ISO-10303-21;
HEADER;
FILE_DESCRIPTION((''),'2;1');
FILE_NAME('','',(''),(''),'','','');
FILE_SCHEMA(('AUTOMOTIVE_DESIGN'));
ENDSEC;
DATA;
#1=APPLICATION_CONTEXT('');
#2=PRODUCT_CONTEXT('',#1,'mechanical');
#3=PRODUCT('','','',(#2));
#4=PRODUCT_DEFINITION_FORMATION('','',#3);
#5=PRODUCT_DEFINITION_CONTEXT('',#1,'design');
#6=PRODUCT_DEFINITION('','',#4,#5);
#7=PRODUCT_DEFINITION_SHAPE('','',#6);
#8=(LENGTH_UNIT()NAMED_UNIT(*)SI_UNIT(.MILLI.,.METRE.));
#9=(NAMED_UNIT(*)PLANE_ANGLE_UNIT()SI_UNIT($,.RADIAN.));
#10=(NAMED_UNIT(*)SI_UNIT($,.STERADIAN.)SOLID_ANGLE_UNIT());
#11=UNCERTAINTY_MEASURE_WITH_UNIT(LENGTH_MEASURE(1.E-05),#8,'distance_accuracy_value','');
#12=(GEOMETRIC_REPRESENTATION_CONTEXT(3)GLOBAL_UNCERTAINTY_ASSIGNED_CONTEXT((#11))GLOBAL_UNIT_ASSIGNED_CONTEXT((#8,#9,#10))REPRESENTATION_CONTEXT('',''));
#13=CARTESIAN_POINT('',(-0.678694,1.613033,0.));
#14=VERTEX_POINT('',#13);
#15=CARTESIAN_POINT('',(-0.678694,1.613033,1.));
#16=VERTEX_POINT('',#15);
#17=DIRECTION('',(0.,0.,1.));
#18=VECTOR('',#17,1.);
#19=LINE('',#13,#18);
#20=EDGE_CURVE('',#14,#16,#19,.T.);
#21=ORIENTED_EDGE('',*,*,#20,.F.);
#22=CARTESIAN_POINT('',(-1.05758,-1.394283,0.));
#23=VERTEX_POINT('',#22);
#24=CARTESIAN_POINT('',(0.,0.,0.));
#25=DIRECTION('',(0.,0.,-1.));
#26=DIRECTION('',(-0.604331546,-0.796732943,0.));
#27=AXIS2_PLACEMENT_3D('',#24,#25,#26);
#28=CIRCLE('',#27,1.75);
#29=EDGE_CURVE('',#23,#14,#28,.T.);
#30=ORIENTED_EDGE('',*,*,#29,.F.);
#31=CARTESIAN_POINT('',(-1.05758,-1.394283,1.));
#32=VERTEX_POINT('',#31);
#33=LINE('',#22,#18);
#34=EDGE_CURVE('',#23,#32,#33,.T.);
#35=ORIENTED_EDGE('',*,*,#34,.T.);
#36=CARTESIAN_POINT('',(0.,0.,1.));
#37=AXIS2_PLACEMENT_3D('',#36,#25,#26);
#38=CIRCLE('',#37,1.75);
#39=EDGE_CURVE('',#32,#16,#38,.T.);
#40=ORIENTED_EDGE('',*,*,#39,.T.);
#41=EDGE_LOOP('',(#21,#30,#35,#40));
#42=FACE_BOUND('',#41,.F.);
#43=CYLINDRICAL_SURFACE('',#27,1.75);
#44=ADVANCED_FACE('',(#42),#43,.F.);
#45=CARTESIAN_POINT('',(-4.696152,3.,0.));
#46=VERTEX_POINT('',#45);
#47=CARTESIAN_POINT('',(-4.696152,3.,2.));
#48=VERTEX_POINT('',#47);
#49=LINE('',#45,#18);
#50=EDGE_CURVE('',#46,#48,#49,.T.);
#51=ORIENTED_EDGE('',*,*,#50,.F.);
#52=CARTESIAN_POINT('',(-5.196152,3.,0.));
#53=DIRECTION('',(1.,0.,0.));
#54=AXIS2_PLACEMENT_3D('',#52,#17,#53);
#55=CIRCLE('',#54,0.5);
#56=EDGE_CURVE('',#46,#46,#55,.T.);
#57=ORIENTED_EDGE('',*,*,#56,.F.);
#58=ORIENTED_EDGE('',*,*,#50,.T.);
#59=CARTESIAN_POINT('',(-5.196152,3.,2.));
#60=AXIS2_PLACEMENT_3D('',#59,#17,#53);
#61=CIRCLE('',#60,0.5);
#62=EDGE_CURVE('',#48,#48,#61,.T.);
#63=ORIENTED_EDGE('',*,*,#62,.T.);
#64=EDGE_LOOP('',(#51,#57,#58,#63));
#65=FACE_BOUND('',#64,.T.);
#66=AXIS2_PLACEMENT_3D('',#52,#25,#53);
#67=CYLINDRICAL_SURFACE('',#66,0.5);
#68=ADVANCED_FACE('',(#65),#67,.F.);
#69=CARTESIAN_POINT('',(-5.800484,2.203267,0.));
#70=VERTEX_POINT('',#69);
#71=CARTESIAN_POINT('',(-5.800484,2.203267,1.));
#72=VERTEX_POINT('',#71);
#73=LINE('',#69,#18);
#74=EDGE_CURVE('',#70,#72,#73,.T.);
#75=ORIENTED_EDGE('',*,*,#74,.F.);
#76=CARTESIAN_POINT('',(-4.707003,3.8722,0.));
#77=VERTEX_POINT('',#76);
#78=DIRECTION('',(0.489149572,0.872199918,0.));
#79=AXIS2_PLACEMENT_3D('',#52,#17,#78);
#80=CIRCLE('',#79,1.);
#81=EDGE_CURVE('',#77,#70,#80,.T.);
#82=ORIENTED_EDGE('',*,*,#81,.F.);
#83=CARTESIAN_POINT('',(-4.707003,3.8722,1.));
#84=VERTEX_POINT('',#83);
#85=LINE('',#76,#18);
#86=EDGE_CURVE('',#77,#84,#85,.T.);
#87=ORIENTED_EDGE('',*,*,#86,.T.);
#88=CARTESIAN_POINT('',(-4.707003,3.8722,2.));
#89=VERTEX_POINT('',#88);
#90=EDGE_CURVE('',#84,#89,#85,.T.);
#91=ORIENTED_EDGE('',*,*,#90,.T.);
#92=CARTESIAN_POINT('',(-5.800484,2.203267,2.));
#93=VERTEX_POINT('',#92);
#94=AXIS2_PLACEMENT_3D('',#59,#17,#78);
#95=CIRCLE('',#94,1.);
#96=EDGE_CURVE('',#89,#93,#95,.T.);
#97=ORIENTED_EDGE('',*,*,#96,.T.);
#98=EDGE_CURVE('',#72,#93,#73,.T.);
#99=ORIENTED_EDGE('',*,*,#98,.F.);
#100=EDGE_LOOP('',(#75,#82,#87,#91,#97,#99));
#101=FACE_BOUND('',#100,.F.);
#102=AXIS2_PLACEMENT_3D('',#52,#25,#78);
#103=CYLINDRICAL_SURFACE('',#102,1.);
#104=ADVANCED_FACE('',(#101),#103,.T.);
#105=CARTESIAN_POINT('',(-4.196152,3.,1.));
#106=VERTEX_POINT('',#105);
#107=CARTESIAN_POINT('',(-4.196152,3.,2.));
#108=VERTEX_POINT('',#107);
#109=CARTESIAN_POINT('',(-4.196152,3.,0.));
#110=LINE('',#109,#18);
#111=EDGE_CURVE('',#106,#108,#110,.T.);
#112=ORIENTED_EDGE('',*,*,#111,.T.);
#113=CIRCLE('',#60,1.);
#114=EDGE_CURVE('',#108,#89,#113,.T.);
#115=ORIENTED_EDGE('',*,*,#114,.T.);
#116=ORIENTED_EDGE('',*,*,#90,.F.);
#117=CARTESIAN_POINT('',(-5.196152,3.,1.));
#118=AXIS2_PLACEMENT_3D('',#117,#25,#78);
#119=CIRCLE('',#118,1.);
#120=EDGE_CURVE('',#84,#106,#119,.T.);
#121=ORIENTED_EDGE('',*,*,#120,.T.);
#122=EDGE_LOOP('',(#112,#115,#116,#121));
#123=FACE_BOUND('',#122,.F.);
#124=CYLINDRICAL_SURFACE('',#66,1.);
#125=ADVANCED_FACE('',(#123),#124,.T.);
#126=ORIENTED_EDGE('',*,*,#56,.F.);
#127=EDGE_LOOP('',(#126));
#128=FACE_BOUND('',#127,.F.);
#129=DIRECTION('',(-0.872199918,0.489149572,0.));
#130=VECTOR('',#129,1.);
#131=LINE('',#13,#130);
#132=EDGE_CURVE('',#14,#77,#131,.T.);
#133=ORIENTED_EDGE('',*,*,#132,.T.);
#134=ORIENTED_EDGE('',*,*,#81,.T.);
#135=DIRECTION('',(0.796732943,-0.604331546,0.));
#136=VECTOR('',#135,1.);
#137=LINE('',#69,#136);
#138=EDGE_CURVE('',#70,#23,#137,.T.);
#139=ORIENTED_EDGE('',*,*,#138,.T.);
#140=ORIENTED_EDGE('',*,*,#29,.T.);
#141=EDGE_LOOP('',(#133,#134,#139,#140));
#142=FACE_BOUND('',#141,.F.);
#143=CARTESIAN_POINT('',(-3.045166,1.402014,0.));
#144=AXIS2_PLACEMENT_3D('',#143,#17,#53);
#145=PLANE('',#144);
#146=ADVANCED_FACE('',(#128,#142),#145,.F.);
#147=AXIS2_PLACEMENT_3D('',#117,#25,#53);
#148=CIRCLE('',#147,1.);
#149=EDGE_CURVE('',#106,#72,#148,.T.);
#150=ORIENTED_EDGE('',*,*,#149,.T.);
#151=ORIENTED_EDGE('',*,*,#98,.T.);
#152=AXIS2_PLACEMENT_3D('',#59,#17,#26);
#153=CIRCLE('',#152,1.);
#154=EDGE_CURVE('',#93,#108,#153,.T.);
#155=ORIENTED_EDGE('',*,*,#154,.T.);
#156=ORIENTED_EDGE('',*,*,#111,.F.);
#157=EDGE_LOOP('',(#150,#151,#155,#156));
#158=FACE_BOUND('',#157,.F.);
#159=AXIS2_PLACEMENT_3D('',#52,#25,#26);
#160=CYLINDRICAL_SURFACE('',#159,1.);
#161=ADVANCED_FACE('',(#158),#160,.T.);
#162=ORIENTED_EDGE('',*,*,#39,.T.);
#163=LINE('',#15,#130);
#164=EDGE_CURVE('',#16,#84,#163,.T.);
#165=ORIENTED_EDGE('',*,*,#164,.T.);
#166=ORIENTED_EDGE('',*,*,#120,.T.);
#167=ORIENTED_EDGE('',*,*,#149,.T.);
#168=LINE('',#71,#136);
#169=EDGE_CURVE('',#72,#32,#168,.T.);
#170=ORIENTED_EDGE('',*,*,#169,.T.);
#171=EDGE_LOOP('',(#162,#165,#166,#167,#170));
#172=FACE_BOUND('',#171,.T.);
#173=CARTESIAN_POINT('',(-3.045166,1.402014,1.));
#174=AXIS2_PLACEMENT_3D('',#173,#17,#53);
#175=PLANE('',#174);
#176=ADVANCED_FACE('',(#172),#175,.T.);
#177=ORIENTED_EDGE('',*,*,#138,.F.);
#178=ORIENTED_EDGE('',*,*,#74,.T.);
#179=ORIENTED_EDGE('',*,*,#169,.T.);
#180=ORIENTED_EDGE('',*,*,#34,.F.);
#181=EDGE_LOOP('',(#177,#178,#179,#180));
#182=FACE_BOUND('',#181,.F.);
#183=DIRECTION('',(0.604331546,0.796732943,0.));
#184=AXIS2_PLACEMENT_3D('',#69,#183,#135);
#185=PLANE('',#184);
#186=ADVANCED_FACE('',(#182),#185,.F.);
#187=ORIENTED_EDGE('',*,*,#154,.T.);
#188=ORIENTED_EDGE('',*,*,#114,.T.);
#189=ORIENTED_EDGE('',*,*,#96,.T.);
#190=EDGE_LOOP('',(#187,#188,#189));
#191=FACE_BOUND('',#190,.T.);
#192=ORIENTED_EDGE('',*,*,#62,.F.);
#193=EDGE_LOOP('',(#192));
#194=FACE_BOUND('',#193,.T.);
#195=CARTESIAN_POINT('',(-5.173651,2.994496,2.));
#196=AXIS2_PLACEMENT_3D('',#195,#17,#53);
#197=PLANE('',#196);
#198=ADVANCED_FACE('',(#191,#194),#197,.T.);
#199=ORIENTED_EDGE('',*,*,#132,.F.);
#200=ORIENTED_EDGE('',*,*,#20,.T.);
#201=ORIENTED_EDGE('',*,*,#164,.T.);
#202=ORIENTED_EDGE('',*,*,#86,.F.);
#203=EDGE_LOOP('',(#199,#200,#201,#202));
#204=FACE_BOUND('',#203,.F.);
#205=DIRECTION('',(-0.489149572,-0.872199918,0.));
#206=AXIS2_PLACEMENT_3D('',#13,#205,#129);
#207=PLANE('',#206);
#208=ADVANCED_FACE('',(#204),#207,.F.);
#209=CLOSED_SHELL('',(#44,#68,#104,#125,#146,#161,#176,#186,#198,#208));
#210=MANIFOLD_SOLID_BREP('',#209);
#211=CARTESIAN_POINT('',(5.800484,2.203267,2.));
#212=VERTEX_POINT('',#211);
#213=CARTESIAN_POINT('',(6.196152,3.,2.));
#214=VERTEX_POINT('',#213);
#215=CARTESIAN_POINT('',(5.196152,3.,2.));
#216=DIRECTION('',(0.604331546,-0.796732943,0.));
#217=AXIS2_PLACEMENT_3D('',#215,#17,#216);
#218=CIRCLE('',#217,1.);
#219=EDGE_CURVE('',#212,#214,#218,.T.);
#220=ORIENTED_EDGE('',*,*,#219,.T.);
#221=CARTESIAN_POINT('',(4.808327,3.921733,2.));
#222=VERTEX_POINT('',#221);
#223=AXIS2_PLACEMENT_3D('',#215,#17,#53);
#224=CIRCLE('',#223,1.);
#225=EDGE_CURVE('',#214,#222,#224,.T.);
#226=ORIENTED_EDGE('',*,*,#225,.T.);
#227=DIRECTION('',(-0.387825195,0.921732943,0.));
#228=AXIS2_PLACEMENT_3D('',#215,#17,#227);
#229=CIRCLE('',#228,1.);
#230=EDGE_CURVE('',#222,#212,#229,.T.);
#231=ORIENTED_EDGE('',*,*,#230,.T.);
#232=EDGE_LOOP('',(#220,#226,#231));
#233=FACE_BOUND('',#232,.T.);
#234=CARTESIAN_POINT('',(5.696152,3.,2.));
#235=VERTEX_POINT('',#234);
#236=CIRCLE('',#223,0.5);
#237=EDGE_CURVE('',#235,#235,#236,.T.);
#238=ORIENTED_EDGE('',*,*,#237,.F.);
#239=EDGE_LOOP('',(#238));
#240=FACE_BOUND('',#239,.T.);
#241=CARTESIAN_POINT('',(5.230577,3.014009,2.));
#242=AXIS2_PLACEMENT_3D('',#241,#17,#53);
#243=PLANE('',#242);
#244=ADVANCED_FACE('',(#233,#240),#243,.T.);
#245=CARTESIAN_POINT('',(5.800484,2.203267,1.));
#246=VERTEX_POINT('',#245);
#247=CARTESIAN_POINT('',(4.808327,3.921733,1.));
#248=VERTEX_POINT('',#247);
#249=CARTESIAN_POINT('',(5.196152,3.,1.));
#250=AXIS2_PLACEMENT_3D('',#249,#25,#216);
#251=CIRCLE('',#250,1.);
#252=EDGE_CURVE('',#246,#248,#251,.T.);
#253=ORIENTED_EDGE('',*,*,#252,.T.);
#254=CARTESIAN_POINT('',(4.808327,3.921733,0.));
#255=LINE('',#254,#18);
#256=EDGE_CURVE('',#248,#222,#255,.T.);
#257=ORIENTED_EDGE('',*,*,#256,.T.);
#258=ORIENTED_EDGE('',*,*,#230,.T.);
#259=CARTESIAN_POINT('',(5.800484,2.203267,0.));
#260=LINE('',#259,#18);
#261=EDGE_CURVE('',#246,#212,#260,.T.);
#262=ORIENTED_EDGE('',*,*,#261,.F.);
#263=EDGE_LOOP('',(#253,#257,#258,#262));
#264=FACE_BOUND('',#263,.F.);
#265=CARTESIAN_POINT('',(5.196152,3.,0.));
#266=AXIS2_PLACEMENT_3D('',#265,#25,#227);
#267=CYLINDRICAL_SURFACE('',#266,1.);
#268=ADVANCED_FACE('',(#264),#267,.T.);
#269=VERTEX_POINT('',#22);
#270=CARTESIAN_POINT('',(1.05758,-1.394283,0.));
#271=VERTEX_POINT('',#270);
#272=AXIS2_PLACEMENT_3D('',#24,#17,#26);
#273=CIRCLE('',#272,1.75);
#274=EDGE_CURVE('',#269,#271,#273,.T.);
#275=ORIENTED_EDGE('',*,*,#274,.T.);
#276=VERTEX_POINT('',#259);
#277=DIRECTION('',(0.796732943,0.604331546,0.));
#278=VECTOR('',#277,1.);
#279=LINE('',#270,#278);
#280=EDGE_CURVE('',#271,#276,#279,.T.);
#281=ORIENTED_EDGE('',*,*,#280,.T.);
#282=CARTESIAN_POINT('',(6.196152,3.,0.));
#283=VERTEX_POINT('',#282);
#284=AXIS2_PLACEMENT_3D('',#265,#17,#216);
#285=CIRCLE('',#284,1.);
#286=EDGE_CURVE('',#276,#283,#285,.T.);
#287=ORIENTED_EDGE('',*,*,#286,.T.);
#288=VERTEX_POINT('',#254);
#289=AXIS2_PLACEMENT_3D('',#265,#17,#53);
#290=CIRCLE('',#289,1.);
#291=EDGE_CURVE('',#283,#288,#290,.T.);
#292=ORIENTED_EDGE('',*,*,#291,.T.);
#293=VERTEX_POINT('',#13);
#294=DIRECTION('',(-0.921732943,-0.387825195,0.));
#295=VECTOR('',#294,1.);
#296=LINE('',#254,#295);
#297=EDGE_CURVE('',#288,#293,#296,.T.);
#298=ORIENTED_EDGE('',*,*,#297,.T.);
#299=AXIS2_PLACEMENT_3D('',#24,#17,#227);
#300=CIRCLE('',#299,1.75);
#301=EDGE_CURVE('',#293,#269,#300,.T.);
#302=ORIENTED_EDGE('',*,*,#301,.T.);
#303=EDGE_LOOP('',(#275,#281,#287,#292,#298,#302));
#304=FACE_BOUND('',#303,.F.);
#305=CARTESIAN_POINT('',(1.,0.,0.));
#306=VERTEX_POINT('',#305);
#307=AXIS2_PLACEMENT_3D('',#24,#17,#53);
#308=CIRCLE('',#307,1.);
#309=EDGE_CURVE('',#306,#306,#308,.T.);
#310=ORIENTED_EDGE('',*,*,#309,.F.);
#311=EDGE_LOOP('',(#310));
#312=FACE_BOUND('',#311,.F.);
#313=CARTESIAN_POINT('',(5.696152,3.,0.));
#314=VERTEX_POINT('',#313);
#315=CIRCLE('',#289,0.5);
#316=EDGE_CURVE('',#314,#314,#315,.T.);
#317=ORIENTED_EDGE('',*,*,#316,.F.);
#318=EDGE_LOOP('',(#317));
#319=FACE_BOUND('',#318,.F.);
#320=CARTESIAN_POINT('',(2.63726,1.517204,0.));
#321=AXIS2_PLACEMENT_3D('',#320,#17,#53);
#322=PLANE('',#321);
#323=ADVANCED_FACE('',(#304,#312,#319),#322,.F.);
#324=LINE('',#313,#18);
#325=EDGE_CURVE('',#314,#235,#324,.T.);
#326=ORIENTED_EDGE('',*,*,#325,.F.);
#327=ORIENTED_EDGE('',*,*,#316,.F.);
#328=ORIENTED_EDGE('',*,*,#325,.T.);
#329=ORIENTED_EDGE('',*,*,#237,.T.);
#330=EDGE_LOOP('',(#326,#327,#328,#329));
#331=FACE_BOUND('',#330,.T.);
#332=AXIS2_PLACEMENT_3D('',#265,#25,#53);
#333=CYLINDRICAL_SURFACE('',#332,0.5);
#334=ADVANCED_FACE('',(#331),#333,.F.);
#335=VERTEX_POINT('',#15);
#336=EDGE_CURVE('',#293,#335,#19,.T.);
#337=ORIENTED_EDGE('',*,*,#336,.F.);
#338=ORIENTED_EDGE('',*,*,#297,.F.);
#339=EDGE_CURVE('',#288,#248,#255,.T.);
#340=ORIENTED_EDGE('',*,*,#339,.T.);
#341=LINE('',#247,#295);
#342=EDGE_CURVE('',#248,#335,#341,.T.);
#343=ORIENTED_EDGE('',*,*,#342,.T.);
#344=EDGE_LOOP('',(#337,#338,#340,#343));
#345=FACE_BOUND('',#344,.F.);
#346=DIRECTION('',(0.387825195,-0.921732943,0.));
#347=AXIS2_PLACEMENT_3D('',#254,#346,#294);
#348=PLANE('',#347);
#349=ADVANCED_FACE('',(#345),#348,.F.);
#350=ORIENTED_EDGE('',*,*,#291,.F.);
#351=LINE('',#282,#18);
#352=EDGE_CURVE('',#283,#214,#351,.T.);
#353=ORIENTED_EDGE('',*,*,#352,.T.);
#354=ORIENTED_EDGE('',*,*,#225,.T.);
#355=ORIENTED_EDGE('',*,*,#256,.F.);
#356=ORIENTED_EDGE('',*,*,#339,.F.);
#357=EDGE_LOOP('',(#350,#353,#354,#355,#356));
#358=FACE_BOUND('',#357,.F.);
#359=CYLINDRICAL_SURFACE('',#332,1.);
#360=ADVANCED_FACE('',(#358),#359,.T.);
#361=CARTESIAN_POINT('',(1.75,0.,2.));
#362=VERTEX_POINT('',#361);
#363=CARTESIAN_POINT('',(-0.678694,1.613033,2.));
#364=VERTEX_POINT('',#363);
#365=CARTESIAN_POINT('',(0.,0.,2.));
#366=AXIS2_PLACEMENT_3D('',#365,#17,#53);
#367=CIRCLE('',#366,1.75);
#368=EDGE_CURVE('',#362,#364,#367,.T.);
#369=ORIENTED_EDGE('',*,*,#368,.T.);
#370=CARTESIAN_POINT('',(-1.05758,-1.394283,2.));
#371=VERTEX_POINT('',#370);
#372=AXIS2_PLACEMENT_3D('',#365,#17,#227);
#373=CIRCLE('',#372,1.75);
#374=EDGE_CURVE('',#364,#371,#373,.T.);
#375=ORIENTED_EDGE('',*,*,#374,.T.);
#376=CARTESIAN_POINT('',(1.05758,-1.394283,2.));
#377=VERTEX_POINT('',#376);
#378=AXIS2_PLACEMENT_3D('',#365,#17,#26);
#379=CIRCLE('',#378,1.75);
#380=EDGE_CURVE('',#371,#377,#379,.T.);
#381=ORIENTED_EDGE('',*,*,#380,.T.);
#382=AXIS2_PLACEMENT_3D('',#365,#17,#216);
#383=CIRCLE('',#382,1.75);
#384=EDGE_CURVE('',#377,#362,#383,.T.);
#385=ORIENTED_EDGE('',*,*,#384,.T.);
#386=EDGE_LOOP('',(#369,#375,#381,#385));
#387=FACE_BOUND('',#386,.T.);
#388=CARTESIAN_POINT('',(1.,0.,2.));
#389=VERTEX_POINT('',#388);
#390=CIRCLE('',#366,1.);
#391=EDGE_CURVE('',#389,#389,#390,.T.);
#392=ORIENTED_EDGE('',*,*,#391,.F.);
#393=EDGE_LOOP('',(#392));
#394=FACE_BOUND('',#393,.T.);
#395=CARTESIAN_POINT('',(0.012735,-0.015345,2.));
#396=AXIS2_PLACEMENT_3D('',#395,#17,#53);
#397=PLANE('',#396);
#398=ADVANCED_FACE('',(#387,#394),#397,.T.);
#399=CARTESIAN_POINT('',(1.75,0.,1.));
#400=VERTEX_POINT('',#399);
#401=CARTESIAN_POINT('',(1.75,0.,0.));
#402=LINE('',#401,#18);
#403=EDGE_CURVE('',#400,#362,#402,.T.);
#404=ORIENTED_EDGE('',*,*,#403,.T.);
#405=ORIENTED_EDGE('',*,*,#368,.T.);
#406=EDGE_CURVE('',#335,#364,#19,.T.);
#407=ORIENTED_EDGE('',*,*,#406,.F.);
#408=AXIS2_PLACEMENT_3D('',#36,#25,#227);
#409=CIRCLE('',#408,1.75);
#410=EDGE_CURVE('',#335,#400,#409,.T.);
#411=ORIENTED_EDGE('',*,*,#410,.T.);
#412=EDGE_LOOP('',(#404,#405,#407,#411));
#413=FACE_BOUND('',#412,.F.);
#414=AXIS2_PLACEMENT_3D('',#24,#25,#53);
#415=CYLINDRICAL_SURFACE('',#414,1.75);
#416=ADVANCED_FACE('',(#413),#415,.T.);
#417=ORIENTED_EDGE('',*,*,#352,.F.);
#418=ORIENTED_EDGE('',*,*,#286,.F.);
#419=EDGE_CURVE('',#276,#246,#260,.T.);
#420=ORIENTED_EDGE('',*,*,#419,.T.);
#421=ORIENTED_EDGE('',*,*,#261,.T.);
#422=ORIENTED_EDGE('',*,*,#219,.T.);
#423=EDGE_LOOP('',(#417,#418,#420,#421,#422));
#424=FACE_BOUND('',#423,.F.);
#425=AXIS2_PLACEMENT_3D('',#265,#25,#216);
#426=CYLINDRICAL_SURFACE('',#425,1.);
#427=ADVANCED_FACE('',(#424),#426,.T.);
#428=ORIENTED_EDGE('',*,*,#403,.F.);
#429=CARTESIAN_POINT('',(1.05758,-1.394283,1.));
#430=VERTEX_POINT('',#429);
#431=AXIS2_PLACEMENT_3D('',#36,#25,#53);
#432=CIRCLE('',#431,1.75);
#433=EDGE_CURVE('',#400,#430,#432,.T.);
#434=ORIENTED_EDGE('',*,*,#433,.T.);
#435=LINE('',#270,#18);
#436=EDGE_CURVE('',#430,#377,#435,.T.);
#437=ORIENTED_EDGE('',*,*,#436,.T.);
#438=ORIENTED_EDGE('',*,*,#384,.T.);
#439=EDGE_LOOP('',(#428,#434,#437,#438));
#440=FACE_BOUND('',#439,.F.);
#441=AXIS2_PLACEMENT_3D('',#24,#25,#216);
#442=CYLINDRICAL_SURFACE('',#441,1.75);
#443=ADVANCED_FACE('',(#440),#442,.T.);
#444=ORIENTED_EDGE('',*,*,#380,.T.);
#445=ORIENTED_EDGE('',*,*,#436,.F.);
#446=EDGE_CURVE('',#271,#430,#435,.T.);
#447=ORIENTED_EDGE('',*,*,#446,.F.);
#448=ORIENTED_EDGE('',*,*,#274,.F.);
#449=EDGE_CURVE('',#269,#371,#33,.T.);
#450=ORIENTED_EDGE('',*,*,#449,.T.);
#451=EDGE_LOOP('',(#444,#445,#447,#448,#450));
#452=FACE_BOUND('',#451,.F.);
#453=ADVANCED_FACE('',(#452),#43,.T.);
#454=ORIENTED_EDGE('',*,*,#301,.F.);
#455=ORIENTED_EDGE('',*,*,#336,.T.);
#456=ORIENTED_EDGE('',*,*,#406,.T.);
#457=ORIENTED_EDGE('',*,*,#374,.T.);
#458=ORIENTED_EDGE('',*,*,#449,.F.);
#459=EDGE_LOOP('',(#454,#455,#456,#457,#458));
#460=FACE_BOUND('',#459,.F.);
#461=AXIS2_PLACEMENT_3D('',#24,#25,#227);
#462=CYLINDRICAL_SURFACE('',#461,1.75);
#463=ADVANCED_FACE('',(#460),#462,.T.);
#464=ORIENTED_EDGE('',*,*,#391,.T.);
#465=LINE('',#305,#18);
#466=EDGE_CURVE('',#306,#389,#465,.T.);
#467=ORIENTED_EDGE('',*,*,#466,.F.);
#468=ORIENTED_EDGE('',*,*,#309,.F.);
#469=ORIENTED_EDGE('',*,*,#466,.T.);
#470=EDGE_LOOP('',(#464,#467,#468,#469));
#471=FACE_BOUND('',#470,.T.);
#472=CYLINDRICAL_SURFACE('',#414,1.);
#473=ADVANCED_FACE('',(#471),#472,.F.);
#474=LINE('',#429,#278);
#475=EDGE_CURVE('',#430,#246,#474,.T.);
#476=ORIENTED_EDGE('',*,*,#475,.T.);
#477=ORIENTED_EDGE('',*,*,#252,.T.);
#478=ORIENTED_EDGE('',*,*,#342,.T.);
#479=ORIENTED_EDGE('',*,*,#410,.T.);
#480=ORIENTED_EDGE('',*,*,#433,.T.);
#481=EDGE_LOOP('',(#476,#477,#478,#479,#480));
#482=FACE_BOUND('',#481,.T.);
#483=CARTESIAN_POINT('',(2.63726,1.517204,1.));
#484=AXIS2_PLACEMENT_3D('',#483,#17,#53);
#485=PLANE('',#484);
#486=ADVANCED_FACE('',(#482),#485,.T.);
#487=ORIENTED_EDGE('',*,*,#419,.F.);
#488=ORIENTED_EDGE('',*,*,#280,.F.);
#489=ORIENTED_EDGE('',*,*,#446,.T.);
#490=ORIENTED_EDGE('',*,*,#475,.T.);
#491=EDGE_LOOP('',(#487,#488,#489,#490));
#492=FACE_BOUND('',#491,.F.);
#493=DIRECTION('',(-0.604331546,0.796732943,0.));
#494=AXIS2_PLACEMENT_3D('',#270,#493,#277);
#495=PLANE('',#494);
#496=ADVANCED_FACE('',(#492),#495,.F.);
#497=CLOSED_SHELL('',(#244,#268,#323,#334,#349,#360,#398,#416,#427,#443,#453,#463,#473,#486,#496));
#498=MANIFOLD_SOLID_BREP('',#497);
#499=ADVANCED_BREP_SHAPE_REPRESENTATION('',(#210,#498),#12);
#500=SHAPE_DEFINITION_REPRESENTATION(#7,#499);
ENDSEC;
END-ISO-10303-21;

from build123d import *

# Parameters (mm, degrees)
F0_R     = 1
F1_DEPTH = 2
F0_R_2   = 0.5
F2_DEPTH = 1
F3_DEPTH = 2
F4_DEPTH = 1


with BuildPart() as f1:
    # F0 (on Top) → F1 (new body)
    with BuildSketch(Plane.XY):
        with BuildLine():
            ThreePointArc((1.057580206, -1.3942826499), (1.5673648842, -0.7783747939), (1.75, 0))
            ThreePointArc((1.75, 0), (0.9681904098, 1.4577747873), (-0.6786940919, 1.6130326499))
            ThreePointArc((-0.6786940919, 1.6130326499), (-1.7362742979, 0.21875), (-1.057580206, -1.3942826499))
            ThreePointArc((-1.057580206, -1.3942826499), (0, -1.75), (1.057580206, -1.3942826499))
        make_face()
        Circle(F0_R, mode=Mode.SUBTRACT)
    extrude(amount=F1_DEPTH)



with BuildPart() as f1b:
    # F0 (on Top) → F1, piece 2 (new body)
    with BuildSketch(Plane.XY):
        with BuildLine():
            ThreePointArc((6.1961524227, 3), (5.7494040854, 3.8330141642), (4.8083272274, 3.9217329428))
            ThreePointArc((4.8083272274, 3.9217329428), (4.3301270189, 2.5), (5.800483969, 2.2032670572))
            ThreePointArc((5.800483969, 2.2032670572), (6.0917894994, 2.5552144035), (6.1961524227, 3))
        make_face()
        with Locations((5.1961524227, 3)):
            Circle(F0_R_2, mode=Mode.SUBTRACT)
    extrude(amount=F1_DEPTH)


with BuildPart() as f1_1:
    add(f1.part)

    add(f1b.part)  # F2 merges F1b
    # F0 (on Top) → F2 (join)
    with BuildSketch(Plane.XY):
        with BuildLine():
            ThreePointArc((-0.6786940919, 1.6130326499), (0.9681904098, 1.4577747873), (1.75, 0))
            ThreePointArc((1.75, 0), (1.5673648842, -0.7783747939), (1.057580206, -1.3942826499))
            Line((1.057580206, -1.3942826499), (5.800483969, 2.2032670572))
            ThreePointArc((5.800483969, 2.2032670572), (4.3301270189, 2.5), (4.8083272274, 3.9217329428))
            Line((4.8083272274, 3.9217329428), (-0.6786940919, 1.6130326499))
        make_face()
    extrude(amount=F2_DEPTH)


with BuildPart() as f3:
    # F0 (on Top) → F3 (new body)
    with BuildSketch(Plane.XY):
        with BuildLine():
            ThreePointArc((-4.1961524227, 3), (-4.3332649527, 3.5053960962), (-4.7070028508, 3.8721999176))
            ThreePointArc((-4.7070028508, 3.8721999176), (-6.032603823, 3.5480411071), (-5.800483969, 2.2032670572))
            ThreePointArc((-5.800483969, 2.2032670572), (-4.7513668262, 2.1043629233), (-4.1961524227, 3))
        make_face()
        with Locations((-5.1961524227, 3)):
            Circle(F0_R_2, mode=Mode.SUBTRACT)
    extrude(amount=F3_DEPTH)

    # F0 (on Top) → F4 (join)
    with BuildSketch(Plane.XY):
        with BuildLine():
            ThreePointArc((-1.057580206, -1.3942826499), (-1.7362742979, 0.21875), (-0.6786940919, 1.6130326499))
            Line((-0.6786940919, 1.6130326499), (-4.7070028508, 3.8721999176))
            ThreePointArc((-4.7070028508, 3.8721999176), (-4.3332649527, 3.5053960962), (-4.1961524227, 3))
            ThreePointArc((-4.1961524227, 3), (-4.7513668262, 2.1043629233), (-5.800483969, 2.2032670572))
            Line((-5.800483969, 2.2032670572), (-1.057580206, -1.3942826499))
        make_face()
    extrude(amount=F4_DEPTH)


solid = Compound([f1_1.part, f3.part])
